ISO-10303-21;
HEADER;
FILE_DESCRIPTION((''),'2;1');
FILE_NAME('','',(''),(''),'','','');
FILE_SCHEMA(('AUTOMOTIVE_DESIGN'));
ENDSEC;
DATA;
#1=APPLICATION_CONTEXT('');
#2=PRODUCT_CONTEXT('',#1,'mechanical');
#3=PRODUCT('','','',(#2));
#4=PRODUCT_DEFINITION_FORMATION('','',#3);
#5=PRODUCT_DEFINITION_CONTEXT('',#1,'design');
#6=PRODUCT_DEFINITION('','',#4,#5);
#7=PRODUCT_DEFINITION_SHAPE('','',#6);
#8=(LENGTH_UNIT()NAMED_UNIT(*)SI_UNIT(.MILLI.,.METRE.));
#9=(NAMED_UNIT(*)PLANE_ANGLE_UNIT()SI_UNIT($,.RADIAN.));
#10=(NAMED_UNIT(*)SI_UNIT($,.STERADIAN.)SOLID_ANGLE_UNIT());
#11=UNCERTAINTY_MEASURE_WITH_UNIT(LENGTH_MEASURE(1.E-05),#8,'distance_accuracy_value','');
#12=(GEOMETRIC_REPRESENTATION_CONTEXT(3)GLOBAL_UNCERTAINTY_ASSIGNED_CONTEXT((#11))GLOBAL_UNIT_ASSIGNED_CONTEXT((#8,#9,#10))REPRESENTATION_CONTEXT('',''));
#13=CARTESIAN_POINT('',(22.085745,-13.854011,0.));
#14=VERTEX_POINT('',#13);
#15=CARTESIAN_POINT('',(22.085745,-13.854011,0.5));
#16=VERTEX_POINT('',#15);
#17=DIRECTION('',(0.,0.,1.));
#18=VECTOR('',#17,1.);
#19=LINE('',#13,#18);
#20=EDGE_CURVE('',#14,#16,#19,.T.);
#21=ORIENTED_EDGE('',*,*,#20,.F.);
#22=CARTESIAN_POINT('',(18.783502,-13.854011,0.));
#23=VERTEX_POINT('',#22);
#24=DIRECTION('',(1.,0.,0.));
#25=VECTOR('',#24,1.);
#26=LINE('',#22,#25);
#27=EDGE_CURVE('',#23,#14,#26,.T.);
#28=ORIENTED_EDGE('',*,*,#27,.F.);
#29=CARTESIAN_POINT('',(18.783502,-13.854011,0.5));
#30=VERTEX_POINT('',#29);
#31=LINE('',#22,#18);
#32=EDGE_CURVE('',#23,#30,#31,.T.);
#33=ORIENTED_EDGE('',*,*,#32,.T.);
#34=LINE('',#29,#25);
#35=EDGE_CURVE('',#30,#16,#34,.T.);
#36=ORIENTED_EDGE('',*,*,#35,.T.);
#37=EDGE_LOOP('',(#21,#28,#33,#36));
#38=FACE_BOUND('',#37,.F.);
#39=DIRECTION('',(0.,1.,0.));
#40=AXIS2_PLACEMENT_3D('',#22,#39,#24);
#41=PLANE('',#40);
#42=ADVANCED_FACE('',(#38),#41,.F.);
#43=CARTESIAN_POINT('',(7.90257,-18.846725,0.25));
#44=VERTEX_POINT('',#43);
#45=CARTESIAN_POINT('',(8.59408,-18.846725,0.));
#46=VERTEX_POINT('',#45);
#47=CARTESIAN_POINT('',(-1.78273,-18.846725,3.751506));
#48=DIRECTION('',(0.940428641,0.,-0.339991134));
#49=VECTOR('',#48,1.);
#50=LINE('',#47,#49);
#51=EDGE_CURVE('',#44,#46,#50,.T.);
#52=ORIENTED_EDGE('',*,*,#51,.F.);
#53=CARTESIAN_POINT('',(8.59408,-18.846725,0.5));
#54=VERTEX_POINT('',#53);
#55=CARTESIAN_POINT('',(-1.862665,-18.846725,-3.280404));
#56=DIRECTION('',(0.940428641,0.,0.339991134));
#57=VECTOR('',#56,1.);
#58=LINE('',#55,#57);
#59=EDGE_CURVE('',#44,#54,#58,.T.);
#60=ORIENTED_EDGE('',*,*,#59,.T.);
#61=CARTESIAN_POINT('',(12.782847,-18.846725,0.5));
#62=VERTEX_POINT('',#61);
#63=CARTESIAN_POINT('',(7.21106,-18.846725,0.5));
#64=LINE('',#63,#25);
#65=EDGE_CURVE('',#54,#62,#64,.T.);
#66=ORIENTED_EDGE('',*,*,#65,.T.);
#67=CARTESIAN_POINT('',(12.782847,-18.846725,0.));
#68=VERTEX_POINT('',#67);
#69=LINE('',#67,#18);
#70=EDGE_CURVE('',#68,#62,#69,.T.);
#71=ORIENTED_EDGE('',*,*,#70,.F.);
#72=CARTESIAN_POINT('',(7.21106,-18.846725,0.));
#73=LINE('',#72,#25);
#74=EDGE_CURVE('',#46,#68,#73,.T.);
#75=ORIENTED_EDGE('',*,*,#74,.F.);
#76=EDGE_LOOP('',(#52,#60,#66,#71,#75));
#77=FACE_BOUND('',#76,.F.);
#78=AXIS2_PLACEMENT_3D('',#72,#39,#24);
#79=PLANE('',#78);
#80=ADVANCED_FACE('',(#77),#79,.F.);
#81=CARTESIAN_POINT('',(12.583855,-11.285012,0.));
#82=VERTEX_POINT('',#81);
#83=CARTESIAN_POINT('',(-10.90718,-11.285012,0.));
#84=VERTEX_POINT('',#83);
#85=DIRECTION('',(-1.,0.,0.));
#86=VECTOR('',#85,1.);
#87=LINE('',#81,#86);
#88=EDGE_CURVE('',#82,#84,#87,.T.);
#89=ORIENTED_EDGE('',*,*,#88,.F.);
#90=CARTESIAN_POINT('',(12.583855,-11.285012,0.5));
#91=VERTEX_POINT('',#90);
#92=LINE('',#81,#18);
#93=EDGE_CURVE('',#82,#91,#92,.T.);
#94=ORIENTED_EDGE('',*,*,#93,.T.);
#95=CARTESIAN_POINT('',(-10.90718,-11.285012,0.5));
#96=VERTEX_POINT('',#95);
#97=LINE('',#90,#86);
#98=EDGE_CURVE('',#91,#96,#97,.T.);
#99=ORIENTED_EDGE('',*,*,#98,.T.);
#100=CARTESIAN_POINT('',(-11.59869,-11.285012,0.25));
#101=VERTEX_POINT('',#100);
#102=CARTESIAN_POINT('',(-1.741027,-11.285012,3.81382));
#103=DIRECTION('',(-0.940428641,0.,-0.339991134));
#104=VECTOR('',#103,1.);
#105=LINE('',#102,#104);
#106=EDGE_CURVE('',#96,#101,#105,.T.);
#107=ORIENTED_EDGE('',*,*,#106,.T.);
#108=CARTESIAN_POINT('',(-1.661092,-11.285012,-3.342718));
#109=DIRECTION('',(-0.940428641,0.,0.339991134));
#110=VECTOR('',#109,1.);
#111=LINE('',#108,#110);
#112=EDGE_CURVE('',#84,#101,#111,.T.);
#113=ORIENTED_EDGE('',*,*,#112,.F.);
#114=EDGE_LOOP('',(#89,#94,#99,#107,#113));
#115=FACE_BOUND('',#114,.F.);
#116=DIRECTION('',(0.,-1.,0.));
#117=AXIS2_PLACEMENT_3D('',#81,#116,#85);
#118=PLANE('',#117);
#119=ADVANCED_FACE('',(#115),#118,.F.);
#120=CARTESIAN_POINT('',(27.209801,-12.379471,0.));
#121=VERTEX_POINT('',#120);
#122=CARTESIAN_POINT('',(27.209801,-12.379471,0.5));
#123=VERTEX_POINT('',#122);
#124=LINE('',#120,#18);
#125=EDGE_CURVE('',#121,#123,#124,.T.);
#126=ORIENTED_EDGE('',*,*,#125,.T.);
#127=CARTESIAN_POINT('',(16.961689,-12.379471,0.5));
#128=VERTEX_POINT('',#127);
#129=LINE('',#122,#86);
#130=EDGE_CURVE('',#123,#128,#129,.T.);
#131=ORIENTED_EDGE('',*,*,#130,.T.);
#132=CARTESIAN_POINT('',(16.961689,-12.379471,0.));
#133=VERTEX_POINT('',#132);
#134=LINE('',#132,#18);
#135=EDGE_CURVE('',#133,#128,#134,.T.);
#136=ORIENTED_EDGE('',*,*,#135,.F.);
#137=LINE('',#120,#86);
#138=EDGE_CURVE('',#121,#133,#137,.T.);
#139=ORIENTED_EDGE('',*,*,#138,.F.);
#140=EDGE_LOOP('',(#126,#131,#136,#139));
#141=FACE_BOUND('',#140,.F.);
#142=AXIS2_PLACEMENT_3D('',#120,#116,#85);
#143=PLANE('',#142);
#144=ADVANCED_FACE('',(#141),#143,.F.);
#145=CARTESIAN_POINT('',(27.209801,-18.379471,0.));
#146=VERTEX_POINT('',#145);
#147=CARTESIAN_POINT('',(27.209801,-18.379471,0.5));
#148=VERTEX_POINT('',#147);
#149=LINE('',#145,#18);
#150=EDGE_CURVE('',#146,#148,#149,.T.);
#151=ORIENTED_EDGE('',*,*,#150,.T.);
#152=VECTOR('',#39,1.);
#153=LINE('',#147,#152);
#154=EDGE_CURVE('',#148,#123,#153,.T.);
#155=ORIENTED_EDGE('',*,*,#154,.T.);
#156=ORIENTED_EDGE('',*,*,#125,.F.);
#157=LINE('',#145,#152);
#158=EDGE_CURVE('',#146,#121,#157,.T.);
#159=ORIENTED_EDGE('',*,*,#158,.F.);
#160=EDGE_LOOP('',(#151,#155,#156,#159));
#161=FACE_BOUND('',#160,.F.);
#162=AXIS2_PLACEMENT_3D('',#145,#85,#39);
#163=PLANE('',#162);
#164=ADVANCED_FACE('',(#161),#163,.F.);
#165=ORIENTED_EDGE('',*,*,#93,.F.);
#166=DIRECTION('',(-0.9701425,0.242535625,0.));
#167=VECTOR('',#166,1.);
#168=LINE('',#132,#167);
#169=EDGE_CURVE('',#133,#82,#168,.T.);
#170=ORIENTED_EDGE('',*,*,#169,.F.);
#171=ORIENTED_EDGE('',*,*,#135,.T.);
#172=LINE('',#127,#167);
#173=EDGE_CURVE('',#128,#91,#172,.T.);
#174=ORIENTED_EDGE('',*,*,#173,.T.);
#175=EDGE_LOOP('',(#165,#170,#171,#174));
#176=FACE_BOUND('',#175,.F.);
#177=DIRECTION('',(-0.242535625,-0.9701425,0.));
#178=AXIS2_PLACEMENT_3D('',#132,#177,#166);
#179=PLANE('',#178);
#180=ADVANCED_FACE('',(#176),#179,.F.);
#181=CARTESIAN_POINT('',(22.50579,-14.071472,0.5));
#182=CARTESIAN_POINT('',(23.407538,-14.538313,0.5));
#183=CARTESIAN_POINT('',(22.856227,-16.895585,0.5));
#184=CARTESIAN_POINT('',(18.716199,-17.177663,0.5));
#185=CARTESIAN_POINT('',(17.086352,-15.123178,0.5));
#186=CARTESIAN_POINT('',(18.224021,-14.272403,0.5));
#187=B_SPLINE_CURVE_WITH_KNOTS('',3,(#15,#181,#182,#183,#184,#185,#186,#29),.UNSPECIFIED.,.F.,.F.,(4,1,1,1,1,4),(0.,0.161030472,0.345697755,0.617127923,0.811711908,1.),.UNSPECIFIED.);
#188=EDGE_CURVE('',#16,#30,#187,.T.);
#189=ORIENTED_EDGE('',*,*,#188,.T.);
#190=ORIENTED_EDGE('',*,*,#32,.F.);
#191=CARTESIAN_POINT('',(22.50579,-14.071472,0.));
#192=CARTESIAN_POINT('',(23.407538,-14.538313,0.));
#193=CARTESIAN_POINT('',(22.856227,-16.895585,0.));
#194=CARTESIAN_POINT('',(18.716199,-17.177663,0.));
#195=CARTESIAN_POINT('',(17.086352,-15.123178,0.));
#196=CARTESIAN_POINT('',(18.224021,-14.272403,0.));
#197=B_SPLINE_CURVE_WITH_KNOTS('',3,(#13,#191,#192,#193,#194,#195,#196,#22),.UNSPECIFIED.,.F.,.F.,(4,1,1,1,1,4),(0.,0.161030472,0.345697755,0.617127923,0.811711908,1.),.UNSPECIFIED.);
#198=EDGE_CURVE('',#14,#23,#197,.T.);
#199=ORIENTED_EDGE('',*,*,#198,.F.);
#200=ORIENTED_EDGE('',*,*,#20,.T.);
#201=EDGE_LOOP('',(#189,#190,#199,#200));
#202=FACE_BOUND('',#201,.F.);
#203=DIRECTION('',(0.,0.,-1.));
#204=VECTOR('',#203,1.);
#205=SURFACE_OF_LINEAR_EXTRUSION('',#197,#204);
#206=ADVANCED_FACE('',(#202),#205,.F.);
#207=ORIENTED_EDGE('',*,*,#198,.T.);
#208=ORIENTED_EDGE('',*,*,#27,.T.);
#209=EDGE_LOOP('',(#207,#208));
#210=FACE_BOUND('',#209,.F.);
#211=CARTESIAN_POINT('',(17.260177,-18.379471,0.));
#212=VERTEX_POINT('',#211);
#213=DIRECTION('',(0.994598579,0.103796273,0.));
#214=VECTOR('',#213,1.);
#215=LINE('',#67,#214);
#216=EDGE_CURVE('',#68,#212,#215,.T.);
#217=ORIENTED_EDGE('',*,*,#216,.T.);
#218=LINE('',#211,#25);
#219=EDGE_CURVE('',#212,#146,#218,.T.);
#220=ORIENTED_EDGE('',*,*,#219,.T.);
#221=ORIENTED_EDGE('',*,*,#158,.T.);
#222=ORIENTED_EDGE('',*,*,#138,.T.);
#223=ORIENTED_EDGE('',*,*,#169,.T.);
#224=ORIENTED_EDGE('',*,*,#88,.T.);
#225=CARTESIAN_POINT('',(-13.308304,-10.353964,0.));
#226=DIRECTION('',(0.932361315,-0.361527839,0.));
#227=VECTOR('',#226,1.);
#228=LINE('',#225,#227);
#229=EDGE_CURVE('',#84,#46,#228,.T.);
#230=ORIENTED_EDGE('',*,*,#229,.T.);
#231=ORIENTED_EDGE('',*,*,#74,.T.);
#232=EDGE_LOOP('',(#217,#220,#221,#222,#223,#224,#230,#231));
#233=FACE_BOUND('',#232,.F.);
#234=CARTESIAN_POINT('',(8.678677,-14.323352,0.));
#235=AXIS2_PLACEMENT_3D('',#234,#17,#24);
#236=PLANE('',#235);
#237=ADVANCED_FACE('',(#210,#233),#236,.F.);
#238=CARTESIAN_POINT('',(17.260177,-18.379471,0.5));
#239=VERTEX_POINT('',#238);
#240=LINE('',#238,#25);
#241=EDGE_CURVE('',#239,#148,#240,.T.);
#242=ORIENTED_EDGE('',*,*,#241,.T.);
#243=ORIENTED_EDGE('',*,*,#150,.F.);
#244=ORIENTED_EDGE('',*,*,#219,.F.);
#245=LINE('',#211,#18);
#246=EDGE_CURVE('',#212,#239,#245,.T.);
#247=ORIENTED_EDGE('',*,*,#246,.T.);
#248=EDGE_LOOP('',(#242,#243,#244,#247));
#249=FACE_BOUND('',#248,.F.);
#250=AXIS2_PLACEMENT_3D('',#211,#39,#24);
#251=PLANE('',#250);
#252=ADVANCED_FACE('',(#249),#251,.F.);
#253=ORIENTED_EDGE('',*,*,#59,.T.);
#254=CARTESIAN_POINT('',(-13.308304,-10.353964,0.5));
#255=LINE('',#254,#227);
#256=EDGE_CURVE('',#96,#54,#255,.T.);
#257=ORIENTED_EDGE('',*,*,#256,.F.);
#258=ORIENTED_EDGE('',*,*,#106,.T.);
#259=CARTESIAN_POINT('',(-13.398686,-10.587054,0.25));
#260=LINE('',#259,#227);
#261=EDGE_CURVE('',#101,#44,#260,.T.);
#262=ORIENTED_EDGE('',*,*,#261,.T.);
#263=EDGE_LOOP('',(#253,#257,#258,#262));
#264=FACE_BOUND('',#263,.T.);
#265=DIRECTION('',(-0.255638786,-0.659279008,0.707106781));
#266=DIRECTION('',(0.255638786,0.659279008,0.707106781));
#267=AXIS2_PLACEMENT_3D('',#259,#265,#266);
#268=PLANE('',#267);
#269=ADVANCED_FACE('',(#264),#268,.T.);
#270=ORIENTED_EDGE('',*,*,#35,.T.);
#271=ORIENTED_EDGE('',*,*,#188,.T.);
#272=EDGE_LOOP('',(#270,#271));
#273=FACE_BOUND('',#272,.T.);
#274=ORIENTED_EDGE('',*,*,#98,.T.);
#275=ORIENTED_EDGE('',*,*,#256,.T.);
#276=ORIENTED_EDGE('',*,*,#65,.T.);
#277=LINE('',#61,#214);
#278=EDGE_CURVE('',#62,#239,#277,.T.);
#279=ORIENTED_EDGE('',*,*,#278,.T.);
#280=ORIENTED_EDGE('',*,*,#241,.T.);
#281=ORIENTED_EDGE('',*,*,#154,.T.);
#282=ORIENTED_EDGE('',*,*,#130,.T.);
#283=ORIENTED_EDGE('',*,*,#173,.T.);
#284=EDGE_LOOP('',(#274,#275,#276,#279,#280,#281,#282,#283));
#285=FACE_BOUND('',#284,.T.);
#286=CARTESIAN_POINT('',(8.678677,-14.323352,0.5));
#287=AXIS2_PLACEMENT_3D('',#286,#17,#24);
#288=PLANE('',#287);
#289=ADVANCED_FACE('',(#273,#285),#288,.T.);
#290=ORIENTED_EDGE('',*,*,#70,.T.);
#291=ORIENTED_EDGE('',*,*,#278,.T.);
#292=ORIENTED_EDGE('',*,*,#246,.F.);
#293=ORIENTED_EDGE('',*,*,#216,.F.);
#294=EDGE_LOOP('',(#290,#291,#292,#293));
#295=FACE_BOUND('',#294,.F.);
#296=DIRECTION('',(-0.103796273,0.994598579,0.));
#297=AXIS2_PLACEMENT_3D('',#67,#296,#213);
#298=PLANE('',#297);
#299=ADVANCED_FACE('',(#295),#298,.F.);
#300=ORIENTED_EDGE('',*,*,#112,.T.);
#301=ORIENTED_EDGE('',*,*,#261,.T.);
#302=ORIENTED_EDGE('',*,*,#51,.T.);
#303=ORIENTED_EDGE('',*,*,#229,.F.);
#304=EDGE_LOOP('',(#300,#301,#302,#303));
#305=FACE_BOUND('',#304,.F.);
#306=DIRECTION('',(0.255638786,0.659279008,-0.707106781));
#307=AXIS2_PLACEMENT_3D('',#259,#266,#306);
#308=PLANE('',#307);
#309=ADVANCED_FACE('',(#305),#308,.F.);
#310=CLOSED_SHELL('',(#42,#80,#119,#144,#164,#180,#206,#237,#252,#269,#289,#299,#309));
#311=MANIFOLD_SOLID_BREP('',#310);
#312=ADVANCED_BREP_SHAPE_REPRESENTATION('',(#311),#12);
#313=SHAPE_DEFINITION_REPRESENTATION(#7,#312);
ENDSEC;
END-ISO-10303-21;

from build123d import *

# Parameters (mm, degrees)
F1_DEPTH    = 0.5
F2_T1_DEPTH = 24.3877615645


# Not quite as in the source:
# - a fillet or chamfer that OpenCascade refuses, or shapes differently, is made with other operations: its cross-section is extruded or revolved along the edge and cut away or added


with BuildPart() as f1:
    # F0 (on Top) → F1 (new body)
    with BuildSketch(Plane.XY):
        Polygon((12.5838547959, -11.2850121383), (-12.2901993096, -11.2850121383), (7.2110601937, -18.846724632), (12.7828468132, -18.846724632), (17.260177021, -18.3794706089), (27.2098006904, -18.3794706089), (27.2098006904, -12.3794706089), (16.9616886783, -12.3794706089), align=None)
        with BuildLine():
            add(Edge.make_bspline(
                [(22.0857446844, -13.8540112255), (22.5057904818, -14.0714719098), (23.4075383771, -14.5383131818), (22.856226593, -16.8955850574), (18.716199205, -17.1776625989), (17.0863515211, -15.1231779615), (18.2240211185, -14.2724034673), (18.7835020814, -13.8540112255)],
                knots=[0, 0, 0, 0, 0.1610304719, 0.3456977548, 0.6171279231, 0.8117119076, 1, 1, 1, 1], degree=3))
            Line((18.7835020814, -13.8540112255), (22.0857446844, -13.8540112255))
        make_face(mode=Mode.SUBTRACT)
    extrude(amount=F1_DEPTH)

    # F2: chamfer of 0.5 on 2 edges, made by hand

    # F2_s2 → F2_t1 (cut)
    with BuildSketch(Plane(origin=(-8.0788192676, 3.1326032342, 0), x_dir=(0, 0, 1), z_dir=(0.932361315, -0.3615278389, 0))):
        Polygon((0, 14.9649579531), (0.5, 14.4649579531), (0.5, 14.9649579531), align=None)
        Polygon((0.5, 14.9649579531), (0, 14.4649579531), (0, 14.9649579531), align=None)
    extrude(amount=F2_T1_DEPTH, mode=Mode.SUBTRACT)


solid = f1.part
